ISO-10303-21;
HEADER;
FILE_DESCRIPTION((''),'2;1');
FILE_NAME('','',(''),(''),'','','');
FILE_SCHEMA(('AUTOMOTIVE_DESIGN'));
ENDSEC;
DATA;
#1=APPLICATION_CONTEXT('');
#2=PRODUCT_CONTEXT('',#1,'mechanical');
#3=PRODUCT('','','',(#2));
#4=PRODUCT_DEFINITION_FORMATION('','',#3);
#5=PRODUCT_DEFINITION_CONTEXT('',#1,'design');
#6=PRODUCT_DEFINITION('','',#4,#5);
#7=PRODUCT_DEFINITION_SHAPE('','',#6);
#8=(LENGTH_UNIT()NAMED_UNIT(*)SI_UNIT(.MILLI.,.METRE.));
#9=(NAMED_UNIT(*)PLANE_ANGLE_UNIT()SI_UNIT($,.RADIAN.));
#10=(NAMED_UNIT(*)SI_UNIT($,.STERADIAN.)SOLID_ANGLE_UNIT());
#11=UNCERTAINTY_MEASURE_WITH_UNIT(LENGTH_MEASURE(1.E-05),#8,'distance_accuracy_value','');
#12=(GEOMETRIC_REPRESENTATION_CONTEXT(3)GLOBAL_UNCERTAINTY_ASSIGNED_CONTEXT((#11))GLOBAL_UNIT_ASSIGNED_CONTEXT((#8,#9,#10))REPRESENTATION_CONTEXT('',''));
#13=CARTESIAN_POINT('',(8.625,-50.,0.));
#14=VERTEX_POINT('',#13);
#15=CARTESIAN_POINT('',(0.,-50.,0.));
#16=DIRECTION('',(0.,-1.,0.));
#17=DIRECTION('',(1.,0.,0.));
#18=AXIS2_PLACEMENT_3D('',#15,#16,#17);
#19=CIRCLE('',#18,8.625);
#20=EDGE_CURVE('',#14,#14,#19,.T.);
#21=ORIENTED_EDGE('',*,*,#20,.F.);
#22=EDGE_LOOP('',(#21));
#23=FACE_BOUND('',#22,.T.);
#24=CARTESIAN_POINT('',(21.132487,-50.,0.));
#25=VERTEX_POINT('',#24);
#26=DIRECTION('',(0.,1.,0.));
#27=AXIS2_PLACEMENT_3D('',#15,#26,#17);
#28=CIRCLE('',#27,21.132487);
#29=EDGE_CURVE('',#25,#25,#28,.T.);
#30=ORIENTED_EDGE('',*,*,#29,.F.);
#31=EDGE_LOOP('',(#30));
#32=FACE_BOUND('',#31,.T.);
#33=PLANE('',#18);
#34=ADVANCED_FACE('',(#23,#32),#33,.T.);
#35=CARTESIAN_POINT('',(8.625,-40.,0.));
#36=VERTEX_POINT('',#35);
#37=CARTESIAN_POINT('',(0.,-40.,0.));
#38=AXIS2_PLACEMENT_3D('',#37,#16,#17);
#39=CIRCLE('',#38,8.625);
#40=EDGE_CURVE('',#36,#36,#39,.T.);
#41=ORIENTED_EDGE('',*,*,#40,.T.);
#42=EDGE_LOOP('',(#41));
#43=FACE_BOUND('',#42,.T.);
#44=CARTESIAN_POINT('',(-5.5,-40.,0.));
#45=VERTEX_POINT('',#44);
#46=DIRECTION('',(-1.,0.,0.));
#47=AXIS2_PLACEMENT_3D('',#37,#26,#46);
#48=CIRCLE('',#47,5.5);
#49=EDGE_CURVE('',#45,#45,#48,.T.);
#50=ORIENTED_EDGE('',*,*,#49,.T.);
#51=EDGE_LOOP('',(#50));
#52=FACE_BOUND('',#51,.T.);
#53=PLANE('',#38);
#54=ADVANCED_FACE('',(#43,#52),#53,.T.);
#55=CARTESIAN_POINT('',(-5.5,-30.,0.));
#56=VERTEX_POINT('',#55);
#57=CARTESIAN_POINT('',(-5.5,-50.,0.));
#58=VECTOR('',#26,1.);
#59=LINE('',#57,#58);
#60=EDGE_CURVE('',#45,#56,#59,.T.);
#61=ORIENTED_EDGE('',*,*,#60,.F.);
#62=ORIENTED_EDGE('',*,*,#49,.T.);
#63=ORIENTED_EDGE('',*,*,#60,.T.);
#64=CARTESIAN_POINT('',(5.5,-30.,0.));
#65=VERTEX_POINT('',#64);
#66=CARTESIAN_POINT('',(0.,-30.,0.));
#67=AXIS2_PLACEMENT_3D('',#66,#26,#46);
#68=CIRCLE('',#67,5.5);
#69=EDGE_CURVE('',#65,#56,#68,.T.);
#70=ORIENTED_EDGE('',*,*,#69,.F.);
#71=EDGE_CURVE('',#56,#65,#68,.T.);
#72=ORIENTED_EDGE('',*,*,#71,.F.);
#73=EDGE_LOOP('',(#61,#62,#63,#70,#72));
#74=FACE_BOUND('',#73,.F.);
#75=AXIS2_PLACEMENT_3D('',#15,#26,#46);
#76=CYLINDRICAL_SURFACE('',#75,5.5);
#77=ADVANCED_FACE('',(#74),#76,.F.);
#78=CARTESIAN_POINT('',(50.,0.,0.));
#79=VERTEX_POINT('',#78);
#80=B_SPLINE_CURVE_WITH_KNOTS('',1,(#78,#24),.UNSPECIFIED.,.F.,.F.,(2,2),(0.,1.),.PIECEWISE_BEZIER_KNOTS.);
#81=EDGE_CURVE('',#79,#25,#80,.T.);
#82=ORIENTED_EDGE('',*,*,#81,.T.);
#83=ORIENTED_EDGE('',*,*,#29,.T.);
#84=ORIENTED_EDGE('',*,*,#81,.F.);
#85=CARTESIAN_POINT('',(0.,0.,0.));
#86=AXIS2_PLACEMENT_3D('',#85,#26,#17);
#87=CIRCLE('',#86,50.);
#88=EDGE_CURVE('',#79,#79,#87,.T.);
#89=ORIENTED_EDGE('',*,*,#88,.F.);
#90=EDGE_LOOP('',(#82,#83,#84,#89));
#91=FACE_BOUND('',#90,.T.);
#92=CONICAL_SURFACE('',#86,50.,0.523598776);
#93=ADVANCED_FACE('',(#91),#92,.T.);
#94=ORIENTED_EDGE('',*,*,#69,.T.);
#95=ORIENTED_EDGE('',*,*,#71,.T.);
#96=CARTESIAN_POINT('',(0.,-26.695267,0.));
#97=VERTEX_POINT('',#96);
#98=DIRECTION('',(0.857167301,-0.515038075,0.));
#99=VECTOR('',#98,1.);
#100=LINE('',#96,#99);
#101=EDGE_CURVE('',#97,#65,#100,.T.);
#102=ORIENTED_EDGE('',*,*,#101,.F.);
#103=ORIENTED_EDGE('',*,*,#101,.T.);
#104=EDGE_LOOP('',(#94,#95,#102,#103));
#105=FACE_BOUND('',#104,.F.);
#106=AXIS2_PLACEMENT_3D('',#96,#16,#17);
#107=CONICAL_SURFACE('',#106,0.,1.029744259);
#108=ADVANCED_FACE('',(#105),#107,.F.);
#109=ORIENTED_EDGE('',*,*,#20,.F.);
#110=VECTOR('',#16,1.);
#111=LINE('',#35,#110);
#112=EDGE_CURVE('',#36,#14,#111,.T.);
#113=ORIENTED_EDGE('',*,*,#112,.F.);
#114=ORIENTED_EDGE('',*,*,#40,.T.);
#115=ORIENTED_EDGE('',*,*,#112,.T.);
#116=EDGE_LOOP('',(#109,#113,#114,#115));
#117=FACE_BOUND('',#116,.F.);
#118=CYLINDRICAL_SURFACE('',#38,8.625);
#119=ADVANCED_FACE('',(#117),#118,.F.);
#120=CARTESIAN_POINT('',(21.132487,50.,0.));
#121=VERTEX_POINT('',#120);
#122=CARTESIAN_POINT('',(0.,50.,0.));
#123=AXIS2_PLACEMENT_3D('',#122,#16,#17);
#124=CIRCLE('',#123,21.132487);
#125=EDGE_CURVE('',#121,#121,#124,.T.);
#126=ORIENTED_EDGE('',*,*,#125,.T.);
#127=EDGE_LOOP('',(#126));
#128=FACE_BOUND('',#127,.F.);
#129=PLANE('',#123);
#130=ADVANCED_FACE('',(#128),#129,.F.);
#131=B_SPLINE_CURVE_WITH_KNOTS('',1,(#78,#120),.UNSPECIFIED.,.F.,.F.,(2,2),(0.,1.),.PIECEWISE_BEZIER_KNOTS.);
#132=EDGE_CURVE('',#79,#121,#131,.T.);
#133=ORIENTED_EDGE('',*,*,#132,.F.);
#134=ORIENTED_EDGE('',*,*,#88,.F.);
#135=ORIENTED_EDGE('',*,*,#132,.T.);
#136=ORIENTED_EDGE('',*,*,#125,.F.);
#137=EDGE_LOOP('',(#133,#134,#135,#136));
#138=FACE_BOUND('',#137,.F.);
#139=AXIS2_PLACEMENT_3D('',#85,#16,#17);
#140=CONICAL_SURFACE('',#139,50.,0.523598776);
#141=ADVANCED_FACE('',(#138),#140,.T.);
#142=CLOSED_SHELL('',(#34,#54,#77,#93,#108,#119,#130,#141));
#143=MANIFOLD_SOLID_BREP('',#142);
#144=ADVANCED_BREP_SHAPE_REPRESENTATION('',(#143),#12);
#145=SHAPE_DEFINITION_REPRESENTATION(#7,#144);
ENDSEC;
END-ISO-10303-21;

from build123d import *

# Parameters (mm, degrees)
F0_R           = 50
F1_DEPTH       = 50
F1_TAPER       = 30
F3_D           = 11
F3_DEPTH       = 20
F3_CBORE_D     = 17.25
F3_CBORE_DEPTH = 10
F3_TIP         = 3.3047334047


with BuildPart() as f1:
    # F0 (on Front) → F1 (new body, symmetric)
    with BuildSketch(Plane.XZ):
        Circle(F0_R)
    extrude(amount=F1_DEPTH, both=True, taper=F1_TAPER)

    # F3
    with Locations(Plane.XZ.offset(50)):
        with Locations((0, 0)):
            CounterBoreHole(F3_D / 2, F3_CBORE_D / 2, F3_CBORE_DEPTH, depth=F3_DEPTH)
            with Locations((0, 0, -(F3_DEPTH + F3_TIP / 2))):  # 118° drill point
                Cone(0, F3_D / 2, F3_TIP, mode=Mode.SUBTRACT)


solid = f1.part
